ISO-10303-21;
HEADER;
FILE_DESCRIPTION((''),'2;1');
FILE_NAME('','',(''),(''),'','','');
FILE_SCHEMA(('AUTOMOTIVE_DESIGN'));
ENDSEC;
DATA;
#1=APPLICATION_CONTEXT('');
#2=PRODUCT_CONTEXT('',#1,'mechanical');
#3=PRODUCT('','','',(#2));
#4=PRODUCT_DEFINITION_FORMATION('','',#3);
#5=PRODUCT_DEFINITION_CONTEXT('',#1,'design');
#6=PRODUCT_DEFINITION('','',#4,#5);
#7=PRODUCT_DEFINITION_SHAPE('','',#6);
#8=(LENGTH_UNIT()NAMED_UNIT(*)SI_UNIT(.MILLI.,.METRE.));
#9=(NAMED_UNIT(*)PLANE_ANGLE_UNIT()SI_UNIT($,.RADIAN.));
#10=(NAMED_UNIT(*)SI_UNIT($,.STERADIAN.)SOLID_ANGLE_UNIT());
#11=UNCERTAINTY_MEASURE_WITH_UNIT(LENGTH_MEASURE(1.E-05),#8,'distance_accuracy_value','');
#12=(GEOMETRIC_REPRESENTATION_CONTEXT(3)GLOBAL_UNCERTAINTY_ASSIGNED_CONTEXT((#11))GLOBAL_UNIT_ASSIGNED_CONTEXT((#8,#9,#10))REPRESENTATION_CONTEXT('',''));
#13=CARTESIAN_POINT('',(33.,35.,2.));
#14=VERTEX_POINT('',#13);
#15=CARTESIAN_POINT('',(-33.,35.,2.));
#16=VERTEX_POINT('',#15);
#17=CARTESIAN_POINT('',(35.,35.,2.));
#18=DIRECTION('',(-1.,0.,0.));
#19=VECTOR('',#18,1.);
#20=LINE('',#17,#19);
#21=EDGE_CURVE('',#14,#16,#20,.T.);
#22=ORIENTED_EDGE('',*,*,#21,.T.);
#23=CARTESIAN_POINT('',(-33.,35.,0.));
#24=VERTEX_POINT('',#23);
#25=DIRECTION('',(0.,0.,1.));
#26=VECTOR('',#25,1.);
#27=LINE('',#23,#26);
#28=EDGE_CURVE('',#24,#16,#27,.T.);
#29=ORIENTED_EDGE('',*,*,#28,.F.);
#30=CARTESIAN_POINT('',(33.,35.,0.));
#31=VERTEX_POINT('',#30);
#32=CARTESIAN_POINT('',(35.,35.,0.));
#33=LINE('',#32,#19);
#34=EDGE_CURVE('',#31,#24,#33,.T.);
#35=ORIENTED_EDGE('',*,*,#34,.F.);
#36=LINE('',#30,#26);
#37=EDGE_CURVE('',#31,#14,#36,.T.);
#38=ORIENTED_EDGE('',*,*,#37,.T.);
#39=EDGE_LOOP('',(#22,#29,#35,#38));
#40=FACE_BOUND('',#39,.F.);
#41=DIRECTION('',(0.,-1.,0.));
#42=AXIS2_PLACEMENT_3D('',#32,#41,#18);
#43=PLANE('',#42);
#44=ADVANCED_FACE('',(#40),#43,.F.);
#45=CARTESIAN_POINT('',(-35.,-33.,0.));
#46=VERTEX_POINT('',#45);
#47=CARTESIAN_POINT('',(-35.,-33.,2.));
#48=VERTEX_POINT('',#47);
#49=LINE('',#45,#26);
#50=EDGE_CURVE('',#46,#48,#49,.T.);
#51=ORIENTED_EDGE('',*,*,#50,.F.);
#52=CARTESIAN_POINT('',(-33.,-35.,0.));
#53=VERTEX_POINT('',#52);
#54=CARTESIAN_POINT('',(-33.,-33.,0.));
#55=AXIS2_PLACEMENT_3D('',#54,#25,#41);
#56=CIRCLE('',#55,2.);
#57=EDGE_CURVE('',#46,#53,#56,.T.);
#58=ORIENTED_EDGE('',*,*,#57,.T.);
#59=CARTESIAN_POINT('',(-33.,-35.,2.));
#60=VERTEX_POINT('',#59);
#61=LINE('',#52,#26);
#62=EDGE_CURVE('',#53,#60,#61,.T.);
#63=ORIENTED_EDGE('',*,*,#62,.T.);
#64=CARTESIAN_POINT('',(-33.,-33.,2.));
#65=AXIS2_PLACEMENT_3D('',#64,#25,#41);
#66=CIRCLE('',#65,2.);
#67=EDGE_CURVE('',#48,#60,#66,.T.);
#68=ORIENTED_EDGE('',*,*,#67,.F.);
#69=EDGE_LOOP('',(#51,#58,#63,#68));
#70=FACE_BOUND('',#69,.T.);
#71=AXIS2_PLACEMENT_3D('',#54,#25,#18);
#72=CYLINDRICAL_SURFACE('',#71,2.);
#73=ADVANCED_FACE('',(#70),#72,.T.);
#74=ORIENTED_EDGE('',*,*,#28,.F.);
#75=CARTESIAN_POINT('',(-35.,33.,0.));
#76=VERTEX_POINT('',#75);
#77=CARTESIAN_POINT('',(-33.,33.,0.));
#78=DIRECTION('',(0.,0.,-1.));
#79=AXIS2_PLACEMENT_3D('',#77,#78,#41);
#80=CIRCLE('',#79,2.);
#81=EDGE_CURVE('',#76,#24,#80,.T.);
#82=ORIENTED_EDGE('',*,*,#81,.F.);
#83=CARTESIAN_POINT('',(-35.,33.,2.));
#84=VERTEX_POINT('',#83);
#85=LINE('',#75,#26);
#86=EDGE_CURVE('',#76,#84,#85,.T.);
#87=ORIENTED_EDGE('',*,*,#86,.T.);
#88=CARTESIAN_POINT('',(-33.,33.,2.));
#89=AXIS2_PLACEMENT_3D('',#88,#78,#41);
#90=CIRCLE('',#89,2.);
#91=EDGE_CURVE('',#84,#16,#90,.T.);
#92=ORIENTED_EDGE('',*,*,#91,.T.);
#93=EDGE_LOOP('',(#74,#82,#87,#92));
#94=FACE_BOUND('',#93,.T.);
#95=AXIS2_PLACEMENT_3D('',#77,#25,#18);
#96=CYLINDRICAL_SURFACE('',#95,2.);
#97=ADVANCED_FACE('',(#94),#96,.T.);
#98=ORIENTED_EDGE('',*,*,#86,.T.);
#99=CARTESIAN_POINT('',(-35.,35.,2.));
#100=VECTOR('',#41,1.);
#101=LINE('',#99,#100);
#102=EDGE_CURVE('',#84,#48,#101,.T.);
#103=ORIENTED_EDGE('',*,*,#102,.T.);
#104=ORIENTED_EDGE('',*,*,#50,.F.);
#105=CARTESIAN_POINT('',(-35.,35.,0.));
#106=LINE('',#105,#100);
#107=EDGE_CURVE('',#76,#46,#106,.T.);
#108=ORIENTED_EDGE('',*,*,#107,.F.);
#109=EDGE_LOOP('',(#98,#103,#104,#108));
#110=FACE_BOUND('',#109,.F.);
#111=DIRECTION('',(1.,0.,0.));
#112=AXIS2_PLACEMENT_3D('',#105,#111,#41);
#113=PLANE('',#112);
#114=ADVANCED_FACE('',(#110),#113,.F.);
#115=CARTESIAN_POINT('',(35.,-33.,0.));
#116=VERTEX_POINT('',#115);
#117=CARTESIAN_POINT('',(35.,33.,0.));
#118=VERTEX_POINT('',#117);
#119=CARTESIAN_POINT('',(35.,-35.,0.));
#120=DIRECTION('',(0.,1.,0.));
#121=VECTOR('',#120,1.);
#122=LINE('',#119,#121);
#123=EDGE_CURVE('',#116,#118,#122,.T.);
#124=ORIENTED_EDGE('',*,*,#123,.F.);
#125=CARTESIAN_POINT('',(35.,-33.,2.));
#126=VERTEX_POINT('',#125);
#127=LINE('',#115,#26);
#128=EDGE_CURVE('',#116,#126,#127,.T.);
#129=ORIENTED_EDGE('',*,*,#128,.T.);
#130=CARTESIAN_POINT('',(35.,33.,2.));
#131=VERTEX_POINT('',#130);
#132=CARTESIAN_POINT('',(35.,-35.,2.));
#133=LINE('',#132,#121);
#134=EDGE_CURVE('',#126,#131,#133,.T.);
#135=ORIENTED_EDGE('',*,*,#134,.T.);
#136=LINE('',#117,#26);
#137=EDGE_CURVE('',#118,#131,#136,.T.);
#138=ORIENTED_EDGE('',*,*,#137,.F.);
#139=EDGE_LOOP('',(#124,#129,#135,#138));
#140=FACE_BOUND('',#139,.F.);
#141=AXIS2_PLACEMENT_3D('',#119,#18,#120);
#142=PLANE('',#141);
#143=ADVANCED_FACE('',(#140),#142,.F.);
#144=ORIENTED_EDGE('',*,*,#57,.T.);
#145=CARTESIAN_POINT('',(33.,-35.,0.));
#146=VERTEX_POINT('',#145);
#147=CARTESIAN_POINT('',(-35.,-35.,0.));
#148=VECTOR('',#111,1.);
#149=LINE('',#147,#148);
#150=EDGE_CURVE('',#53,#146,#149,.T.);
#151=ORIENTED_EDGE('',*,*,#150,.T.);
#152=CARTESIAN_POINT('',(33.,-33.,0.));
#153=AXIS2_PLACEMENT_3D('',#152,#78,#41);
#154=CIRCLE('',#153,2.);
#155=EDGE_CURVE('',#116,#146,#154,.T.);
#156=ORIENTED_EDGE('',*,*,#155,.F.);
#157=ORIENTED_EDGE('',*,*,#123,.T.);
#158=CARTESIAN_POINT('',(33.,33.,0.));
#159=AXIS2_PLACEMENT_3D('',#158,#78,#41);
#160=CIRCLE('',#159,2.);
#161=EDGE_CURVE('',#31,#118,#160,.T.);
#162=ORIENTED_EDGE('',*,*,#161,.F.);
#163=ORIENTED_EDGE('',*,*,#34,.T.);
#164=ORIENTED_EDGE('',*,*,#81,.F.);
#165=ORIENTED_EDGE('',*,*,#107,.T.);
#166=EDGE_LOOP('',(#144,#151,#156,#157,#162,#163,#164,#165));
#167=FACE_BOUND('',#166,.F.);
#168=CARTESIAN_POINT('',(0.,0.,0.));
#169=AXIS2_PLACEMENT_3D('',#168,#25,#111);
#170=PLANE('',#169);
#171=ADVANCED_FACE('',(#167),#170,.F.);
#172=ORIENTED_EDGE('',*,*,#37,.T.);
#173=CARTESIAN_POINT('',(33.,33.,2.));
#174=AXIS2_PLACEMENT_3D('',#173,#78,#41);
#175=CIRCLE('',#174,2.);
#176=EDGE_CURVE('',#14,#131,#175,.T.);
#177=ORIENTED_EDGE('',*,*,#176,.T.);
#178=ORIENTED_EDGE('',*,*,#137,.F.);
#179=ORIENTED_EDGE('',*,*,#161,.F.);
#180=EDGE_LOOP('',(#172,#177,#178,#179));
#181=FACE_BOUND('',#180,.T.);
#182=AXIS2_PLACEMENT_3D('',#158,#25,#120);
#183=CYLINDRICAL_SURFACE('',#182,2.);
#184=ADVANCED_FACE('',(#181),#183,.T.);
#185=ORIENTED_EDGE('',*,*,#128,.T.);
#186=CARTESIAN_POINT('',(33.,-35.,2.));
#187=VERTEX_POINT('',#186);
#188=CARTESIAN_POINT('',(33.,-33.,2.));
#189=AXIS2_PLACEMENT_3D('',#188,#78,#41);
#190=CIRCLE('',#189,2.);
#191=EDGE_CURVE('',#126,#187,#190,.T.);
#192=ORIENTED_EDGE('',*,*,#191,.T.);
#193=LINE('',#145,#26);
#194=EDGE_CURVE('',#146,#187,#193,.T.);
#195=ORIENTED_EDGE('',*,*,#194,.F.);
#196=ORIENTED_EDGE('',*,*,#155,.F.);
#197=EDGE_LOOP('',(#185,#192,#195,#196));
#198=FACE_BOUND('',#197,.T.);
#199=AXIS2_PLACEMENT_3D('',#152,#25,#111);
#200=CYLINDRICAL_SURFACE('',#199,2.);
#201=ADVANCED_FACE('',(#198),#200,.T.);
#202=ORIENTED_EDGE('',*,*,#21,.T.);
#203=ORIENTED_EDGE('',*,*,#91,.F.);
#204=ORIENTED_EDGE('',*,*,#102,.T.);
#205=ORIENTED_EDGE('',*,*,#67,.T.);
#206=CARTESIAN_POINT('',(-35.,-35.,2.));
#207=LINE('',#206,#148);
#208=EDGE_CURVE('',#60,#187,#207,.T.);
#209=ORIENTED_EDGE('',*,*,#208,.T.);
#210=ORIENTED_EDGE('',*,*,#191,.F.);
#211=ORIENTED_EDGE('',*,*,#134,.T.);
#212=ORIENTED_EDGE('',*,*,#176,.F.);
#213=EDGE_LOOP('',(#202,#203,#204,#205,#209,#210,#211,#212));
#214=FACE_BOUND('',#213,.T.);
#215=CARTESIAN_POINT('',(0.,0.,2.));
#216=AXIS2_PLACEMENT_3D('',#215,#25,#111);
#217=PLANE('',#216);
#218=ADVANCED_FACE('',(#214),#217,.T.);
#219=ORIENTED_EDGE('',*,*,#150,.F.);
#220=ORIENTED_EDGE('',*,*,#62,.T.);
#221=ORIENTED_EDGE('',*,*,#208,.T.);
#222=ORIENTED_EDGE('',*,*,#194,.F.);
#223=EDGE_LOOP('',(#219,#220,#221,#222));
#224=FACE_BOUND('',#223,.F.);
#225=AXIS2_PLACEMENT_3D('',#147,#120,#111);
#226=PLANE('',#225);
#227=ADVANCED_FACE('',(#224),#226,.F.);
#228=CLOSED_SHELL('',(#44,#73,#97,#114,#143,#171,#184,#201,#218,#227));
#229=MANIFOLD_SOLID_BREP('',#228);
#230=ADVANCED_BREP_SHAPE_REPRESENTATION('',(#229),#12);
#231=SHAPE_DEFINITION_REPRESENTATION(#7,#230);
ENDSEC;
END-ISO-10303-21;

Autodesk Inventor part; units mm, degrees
ref_plane "YZ Plane" through (0, 0, 0) normal (1, 0, 0) x (0, 1, 0)
ref_plane "XZ Plane" through (0, 0, 0) normal (0, 1, 0) x (-1, 0, 0)
ref_plane "XY Plane" through (0, 0, 0) normal (0, 0, 1) x (1, 0, 0)
sketch "Sketch1" plane through (0, 0, 0) normal (0, 0, 1) x (1, 0, 0)
  line L0 (-35, -35) -> (35, -35)
  line L1 (35, -35) -> (35, 35)
  line L2 (35, 35) -> (-35, 35)
  line L3 (-35, 35) -> (-35, -35)
  line L4 (-35, -35) -> (35, 35) construction
  line L5 (35, -35) -> (-35, 35) construction
  point P0 (0, 0)
  dimension "d154" = 70
  dimension "d155" = 70
extrude "Plate5" add sketch "Sketch1" along normal blind 2
fillet "Corner Round1" radius 2 4 edges at (35, 35, 1) (-35, -35, 1) (-35, 35, 1) (35, -35, 1)
sketch "Sketch11" plane through (-50.5, -22, -28) normal (1, 0, 0) x (0, 0, -1)
  line L0 (-25.25, 44) -> (-25.25, 0) construction
  line L1 (0, 0) -> (-25.25, 0) construction
  line L2 (0, 0) -> (0, 44) construction
  line L3 (0, 44) -> (-25.25, 44) construction
  circle A0 centre (-10, 22) radius 5.5
  point P0 (-28, 22)
  point P1 (0, 22)
  dimension "d192" = 11
  dimension "d193" = 10
cut "Cut3" [suppressed]
feature "Corner Round3" [suppressed]
sketch "Sketch10" plane through (-37, 33, 2) normal (1, 0, 0) x (0, 1, 0)
  line L0 (-66, 0) -> (0, 0)
  line L1 (0, 0) -> (0, -30)
  line L2 (0, -30) -> (-66, -30)
  line L3 (-66, -30) -> (-66, 0)
properties part number "PRS 1424 DrSysB diam way cup_1200" material "Stainless Steel"
